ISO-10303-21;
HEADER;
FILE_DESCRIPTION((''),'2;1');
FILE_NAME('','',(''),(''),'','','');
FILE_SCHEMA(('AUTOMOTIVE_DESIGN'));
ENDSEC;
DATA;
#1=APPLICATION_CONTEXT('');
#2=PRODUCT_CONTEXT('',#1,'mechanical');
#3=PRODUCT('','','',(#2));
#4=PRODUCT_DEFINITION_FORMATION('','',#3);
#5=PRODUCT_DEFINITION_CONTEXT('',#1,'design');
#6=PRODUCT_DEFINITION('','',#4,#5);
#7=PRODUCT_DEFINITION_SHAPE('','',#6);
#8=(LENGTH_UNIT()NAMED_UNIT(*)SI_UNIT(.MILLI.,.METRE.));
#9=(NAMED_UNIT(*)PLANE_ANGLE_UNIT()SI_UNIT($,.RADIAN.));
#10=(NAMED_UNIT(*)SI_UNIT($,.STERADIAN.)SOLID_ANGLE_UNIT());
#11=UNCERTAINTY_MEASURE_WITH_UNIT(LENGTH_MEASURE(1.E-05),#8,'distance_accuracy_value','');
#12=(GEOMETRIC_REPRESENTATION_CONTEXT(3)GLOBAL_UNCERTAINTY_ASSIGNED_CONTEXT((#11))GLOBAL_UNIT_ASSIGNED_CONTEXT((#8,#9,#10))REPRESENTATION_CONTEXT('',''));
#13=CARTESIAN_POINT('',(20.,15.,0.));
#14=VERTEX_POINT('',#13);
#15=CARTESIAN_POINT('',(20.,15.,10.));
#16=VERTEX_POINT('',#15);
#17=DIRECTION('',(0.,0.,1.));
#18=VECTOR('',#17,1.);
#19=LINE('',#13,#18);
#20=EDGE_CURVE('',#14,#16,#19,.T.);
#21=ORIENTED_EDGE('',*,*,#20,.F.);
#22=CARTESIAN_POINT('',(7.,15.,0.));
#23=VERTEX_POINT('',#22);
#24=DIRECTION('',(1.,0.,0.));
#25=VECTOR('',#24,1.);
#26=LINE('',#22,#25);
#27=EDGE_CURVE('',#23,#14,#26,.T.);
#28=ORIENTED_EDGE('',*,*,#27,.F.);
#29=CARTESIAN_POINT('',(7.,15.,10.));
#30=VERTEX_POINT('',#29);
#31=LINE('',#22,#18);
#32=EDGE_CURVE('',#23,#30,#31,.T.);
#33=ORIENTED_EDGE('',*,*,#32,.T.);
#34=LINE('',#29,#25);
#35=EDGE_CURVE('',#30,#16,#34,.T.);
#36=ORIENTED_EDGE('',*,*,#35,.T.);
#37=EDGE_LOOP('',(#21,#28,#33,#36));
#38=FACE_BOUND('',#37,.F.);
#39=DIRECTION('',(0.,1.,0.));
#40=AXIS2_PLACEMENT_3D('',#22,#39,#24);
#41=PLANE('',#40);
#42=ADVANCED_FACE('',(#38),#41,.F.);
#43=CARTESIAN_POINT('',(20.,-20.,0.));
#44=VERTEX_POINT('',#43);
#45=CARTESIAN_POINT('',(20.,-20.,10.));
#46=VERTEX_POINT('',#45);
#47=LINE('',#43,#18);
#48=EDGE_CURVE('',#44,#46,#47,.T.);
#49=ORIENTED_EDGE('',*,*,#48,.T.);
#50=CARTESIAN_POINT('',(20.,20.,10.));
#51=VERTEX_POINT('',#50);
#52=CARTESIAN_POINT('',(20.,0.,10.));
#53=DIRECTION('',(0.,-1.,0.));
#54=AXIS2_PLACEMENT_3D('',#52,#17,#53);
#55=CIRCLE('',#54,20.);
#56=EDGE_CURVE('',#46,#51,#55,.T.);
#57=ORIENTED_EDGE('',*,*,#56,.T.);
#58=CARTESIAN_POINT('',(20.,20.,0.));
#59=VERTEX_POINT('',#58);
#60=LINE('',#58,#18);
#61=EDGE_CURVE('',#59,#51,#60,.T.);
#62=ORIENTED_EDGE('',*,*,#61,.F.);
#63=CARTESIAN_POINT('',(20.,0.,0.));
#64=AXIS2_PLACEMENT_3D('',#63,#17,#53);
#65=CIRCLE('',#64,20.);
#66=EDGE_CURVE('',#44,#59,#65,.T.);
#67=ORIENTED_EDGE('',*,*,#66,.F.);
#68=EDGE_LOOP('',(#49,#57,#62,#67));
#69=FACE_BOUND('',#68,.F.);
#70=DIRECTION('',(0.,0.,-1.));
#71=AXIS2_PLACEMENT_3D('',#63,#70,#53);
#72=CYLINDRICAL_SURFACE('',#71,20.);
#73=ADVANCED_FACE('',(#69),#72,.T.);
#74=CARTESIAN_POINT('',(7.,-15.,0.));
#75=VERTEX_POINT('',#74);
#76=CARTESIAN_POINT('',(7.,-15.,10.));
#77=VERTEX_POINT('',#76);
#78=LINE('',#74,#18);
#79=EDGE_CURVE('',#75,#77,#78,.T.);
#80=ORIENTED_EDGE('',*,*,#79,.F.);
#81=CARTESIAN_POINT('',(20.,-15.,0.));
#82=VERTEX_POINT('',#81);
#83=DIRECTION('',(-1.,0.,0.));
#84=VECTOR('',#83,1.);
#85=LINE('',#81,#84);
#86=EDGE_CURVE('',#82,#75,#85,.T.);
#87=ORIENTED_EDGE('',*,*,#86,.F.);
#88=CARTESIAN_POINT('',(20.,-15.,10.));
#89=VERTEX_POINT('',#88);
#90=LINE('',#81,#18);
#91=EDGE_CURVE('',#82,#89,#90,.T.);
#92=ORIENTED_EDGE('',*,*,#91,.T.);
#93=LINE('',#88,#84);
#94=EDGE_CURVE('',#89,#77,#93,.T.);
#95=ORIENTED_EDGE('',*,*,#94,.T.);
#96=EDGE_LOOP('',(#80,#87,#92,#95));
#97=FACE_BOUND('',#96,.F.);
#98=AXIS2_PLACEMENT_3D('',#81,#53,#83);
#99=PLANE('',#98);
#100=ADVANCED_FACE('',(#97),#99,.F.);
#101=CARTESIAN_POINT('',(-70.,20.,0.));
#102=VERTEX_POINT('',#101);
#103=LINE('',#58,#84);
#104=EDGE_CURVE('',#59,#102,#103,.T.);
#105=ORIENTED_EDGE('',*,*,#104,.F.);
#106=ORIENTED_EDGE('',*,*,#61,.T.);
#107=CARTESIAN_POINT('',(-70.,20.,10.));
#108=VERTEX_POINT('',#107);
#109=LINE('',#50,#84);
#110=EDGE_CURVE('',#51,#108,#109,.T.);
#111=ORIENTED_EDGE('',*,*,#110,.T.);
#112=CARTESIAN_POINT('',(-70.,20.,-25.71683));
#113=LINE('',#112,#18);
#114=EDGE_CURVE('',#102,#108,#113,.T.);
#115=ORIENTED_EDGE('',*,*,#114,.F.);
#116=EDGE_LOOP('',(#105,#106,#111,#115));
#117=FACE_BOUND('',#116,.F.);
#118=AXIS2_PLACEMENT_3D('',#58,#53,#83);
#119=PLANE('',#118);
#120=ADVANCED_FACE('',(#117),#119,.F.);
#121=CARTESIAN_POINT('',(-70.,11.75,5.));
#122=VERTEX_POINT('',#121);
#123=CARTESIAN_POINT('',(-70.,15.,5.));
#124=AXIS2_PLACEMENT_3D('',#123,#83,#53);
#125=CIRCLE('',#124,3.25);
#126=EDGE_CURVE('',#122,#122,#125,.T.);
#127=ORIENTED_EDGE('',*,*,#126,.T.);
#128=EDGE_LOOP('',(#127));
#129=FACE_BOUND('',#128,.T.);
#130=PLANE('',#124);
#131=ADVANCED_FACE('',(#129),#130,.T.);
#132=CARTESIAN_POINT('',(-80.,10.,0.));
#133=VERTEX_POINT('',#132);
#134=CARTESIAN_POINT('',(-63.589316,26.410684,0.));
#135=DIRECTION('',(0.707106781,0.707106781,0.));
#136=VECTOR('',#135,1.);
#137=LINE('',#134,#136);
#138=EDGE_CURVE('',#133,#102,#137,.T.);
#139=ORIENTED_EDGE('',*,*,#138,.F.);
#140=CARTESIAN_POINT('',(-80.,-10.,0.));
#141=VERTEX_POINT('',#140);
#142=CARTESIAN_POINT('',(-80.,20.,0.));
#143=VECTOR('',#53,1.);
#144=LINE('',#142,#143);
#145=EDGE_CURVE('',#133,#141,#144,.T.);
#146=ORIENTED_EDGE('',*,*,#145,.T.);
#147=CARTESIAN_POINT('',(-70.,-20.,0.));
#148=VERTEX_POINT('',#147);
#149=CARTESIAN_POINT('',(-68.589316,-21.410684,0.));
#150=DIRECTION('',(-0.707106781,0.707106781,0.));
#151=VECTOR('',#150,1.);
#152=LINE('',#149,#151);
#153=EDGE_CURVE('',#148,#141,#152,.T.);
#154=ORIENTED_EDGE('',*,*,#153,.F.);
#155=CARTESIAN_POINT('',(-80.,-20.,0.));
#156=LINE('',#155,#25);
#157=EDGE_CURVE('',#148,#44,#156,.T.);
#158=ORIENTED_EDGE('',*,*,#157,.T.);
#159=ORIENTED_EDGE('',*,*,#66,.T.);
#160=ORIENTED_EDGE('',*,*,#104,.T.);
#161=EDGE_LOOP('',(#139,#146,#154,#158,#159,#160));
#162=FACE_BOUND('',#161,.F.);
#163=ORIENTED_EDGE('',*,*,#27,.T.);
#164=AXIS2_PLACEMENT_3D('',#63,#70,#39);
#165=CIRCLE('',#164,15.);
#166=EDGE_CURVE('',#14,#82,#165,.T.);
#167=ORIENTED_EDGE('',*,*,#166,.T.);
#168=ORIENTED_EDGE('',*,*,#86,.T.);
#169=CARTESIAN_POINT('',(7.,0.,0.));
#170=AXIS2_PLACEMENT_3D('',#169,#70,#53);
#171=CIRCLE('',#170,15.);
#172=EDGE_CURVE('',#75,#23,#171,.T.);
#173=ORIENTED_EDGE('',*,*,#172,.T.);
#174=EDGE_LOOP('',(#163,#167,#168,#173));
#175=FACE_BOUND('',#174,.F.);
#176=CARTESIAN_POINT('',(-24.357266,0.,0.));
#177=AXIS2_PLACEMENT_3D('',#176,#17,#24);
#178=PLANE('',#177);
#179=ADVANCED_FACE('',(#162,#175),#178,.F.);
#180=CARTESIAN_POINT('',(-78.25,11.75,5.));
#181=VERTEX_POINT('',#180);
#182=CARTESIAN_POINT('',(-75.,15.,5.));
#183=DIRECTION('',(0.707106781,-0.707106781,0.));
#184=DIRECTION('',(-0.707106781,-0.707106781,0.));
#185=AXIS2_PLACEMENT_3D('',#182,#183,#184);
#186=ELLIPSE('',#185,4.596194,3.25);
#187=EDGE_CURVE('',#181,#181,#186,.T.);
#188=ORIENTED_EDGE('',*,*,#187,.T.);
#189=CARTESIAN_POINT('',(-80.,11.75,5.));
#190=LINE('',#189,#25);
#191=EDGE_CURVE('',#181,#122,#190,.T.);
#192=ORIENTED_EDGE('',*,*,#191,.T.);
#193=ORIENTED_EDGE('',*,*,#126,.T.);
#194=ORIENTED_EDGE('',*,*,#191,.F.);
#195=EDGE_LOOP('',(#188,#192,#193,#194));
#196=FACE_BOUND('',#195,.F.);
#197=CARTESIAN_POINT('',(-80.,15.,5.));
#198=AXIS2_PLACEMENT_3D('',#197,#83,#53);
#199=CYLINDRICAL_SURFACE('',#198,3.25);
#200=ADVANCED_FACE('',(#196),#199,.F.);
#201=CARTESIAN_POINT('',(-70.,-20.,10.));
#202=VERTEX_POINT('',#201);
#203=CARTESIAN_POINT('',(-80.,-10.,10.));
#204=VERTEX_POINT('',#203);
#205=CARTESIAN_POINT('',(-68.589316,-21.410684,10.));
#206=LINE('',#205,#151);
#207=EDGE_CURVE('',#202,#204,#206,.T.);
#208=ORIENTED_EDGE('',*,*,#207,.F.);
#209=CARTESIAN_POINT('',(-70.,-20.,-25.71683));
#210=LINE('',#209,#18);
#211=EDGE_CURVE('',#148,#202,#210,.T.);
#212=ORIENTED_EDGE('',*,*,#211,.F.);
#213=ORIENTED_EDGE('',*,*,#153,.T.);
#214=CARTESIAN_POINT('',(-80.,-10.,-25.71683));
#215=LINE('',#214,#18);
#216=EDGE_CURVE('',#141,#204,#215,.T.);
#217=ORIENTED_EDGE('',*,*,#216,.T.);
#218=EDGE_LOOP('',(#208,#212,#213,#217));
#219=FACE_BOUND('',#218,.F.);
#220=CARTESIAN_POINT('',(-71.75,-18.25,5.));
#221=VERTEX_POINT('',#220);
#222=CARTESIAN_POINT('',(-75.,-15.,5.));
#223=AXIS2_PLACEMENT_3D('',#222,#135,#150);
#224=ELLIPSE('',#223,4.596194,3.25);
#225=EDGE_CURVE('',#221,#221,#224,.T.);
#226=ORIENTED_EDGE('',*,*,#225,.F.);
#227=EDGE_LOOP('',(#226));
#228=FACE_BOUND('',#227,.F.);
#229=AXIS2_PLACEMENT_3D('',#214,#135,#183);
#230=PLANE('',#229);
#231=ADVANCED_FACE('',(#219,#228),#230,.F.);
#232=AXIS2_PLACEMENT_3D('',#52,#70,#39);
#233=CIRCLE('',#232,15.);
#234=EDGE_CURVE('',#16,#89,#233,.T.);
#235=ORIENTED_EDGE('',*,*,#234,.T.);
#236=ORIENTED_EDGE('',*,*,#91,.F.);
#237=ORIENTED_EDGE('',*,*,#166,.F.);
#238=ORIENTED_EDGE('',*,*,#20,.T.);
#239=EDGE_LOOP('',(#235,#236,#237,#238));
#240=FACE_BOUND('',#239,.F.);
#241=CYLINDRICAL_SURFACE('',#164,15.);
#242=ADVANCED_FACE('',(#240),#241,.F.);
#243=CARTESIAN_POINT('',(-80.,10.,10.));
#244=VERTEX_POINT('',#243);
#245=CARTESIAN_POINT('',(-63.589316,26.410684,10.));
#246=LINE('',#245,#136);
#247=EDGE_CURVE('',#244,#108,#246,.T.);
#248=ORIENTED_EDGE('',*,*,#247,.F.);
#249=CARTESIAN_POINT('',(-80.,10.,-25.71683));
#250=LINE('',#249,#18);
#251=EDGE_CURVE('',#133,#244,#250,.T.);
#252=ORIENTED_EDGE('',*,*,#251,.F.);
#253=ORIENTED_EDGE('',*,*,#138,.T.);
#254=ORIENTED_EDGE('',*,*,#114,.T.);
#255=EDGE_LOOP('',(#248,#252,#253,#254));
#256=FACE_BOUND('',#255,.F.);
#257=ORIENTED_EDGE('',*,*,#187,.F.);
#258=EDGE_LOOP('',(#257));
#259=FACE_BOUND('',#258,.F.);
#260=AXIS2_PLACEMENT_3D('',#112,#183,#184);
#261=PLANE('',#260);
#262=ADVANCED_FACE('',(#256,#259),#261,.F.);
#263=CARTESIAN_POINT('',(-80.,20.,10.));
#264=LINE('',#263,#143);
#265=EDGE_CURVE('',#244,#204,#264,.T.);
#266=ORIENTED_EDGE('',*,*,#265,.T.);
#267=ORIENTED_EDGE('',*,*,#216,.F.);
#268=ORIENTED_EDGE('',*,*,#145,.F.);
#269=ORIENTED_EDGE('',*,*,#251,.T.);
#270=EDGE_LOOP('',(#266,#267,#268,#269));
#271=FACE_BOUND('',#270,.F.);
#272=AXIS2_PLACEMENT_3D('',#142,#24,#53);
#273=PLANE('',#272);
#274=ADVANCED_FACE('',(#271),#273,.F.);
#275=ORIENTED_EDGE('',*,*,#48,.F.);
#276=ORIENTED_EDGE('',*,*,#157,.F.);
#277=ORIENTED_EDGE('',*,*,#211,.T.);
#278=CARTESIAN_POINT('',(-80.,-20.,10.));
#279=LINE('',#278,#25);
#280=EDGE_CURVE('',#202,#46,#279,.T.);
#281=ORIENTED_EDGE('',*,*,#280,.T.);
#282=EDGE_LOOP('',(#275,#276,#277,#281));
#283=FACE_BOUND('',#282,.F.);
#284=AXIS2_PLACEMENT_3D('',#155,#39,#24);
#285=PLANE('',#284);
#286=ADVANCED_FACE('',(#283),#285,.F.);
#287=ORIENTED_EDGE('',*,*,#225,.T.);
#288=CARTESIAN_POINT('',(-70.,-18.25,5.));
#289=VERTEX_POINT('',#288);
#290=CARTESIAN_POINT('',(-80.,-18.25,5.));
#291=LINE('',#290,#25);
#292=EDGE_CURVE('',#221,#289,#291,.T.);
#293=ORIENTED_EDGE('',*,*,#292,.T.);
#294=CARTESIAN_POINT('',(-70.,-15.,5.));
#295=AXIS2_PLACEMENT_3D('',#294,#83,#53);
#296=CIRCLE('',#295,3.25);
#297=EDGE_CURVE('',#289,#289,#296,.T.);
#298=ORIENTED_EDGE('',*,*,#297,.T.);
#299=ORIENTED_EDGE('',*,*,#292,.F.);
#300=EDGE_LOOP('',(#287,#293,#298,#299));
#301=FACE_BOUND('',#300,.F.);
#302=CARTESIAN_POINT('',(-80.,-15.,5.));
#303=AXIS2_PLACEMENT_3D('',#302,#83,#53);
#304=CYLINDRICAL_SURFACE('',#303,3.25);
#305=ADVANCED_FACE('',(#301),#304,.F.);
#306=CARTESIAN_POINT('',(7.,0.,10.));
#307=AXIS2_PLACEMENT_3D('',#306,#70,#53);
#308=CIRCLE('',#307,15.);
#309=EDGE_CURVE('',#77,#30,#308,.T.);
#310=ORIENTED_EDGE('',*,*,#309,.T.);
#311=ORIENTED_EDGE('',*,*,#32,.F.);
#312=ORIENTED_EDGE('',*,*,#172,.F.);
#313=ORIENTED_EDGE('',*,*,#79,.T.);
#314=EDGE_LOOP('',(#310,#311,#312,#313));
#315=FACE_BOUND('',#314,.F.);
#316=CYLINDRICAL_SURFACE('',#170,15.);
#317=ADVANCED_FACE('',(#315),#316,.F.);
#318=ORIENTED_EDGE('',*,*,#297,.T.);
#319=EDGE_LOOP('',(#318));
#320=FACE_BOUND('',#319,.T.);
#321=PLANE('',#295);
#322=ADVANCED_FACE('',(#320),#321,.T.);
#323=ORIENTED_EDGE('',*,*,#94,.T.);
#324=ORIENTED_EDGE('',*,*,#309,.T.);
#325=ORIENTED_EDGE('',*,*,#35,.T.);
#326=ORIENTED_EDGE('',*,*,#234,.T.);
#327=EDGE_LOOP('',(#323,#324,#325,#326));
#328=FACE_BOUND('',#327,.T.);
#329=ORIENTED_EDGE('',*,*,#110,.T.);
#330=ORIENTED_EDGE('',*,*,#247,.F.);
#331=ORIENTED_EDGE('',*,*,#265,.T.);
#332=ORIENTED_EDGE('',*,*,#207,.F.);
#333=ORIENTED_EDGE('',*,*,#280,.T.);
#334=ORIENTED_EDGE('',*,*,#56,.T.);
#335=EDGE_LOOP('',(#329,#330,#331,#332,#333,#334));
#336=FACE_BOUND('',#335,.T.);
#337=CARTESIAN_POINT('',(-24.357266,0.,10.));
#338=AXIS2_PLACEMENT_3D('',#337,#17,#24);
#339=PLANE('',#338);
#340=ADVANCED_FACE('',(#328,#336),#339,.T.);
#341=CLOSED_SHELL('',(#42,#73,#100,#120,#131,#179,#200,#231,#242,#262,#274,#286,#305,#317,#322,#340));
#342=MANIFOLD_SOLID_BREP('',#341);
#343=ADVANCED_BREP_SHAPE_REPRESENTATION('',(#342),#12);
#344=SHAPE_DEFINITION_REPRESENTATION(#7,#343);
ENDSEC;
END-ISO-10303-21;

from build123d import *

# Parameters (mm, degrees)
F1_DEPTH    = 10
F2_R        = 3.25
F3_DEPTH    = 10
F4_T1_DEPTH = 61.4336597593


# Not quite as in the source:
# - a fillet or chamfer that OpenCascade refuses, or shapes differently, is made with other operations: its cross-section is extruded or revolved along the edge and cut away or added


with BuildPart() as f1:
    # F0 (on Top) → F1 (new body)
    with BuildSketch(Plane.XY):
        with BuildLine():
            Line((20, 20), (-80, 20))
            Line((-80, 20), (-80, -20))
            Line((-80, -20), (20, -20))
            ThreePointArc((20, -20), (40, 0), (20, 20))
        make_face()
        with BuildLine():
            ThreePointArc((20, 15), (35, 0), (20, -15))
            Line((20, -15), (7, -15))
            ThreePointArc((7, -15), (-8, 0), (7, 15))
            Line((7, 15), (20, 15))
        make_face(mode=Mode.SUBTRACT)
    extrude(amount=F1_DEPTH)

    # F2 (on face) → F3 (cut)
    with BuildSketch(Plane(origin=(-80, 0, 0), x_dir=(0, -1, 0), z_dir=(-1, 0, 0))):
        with Locations((-15, 5)):
            Circle(F2_R)
        with Locations((15, 5)):
            Circle(F2_R)
    extrude(amount=-F3_DEPTH, mode=Mode.SUBTRACT)

    # F4: chamfer of 10 on 2 edges, made by hand

    # F4_s2 → F4_t1 (cut)
    with BuildSketch(Plane.XY.offset(-25.7168298797)):
        Polygon((-70, 20), (-80, 10), (-80, 20), align=None)
        Polygon((-80, -10), (-70, -20), (-80, -20), align=None)
    extrude(amount=F4_T1_DEPTH, mode=Mode.SUBTRACT)


solid = f1.part
